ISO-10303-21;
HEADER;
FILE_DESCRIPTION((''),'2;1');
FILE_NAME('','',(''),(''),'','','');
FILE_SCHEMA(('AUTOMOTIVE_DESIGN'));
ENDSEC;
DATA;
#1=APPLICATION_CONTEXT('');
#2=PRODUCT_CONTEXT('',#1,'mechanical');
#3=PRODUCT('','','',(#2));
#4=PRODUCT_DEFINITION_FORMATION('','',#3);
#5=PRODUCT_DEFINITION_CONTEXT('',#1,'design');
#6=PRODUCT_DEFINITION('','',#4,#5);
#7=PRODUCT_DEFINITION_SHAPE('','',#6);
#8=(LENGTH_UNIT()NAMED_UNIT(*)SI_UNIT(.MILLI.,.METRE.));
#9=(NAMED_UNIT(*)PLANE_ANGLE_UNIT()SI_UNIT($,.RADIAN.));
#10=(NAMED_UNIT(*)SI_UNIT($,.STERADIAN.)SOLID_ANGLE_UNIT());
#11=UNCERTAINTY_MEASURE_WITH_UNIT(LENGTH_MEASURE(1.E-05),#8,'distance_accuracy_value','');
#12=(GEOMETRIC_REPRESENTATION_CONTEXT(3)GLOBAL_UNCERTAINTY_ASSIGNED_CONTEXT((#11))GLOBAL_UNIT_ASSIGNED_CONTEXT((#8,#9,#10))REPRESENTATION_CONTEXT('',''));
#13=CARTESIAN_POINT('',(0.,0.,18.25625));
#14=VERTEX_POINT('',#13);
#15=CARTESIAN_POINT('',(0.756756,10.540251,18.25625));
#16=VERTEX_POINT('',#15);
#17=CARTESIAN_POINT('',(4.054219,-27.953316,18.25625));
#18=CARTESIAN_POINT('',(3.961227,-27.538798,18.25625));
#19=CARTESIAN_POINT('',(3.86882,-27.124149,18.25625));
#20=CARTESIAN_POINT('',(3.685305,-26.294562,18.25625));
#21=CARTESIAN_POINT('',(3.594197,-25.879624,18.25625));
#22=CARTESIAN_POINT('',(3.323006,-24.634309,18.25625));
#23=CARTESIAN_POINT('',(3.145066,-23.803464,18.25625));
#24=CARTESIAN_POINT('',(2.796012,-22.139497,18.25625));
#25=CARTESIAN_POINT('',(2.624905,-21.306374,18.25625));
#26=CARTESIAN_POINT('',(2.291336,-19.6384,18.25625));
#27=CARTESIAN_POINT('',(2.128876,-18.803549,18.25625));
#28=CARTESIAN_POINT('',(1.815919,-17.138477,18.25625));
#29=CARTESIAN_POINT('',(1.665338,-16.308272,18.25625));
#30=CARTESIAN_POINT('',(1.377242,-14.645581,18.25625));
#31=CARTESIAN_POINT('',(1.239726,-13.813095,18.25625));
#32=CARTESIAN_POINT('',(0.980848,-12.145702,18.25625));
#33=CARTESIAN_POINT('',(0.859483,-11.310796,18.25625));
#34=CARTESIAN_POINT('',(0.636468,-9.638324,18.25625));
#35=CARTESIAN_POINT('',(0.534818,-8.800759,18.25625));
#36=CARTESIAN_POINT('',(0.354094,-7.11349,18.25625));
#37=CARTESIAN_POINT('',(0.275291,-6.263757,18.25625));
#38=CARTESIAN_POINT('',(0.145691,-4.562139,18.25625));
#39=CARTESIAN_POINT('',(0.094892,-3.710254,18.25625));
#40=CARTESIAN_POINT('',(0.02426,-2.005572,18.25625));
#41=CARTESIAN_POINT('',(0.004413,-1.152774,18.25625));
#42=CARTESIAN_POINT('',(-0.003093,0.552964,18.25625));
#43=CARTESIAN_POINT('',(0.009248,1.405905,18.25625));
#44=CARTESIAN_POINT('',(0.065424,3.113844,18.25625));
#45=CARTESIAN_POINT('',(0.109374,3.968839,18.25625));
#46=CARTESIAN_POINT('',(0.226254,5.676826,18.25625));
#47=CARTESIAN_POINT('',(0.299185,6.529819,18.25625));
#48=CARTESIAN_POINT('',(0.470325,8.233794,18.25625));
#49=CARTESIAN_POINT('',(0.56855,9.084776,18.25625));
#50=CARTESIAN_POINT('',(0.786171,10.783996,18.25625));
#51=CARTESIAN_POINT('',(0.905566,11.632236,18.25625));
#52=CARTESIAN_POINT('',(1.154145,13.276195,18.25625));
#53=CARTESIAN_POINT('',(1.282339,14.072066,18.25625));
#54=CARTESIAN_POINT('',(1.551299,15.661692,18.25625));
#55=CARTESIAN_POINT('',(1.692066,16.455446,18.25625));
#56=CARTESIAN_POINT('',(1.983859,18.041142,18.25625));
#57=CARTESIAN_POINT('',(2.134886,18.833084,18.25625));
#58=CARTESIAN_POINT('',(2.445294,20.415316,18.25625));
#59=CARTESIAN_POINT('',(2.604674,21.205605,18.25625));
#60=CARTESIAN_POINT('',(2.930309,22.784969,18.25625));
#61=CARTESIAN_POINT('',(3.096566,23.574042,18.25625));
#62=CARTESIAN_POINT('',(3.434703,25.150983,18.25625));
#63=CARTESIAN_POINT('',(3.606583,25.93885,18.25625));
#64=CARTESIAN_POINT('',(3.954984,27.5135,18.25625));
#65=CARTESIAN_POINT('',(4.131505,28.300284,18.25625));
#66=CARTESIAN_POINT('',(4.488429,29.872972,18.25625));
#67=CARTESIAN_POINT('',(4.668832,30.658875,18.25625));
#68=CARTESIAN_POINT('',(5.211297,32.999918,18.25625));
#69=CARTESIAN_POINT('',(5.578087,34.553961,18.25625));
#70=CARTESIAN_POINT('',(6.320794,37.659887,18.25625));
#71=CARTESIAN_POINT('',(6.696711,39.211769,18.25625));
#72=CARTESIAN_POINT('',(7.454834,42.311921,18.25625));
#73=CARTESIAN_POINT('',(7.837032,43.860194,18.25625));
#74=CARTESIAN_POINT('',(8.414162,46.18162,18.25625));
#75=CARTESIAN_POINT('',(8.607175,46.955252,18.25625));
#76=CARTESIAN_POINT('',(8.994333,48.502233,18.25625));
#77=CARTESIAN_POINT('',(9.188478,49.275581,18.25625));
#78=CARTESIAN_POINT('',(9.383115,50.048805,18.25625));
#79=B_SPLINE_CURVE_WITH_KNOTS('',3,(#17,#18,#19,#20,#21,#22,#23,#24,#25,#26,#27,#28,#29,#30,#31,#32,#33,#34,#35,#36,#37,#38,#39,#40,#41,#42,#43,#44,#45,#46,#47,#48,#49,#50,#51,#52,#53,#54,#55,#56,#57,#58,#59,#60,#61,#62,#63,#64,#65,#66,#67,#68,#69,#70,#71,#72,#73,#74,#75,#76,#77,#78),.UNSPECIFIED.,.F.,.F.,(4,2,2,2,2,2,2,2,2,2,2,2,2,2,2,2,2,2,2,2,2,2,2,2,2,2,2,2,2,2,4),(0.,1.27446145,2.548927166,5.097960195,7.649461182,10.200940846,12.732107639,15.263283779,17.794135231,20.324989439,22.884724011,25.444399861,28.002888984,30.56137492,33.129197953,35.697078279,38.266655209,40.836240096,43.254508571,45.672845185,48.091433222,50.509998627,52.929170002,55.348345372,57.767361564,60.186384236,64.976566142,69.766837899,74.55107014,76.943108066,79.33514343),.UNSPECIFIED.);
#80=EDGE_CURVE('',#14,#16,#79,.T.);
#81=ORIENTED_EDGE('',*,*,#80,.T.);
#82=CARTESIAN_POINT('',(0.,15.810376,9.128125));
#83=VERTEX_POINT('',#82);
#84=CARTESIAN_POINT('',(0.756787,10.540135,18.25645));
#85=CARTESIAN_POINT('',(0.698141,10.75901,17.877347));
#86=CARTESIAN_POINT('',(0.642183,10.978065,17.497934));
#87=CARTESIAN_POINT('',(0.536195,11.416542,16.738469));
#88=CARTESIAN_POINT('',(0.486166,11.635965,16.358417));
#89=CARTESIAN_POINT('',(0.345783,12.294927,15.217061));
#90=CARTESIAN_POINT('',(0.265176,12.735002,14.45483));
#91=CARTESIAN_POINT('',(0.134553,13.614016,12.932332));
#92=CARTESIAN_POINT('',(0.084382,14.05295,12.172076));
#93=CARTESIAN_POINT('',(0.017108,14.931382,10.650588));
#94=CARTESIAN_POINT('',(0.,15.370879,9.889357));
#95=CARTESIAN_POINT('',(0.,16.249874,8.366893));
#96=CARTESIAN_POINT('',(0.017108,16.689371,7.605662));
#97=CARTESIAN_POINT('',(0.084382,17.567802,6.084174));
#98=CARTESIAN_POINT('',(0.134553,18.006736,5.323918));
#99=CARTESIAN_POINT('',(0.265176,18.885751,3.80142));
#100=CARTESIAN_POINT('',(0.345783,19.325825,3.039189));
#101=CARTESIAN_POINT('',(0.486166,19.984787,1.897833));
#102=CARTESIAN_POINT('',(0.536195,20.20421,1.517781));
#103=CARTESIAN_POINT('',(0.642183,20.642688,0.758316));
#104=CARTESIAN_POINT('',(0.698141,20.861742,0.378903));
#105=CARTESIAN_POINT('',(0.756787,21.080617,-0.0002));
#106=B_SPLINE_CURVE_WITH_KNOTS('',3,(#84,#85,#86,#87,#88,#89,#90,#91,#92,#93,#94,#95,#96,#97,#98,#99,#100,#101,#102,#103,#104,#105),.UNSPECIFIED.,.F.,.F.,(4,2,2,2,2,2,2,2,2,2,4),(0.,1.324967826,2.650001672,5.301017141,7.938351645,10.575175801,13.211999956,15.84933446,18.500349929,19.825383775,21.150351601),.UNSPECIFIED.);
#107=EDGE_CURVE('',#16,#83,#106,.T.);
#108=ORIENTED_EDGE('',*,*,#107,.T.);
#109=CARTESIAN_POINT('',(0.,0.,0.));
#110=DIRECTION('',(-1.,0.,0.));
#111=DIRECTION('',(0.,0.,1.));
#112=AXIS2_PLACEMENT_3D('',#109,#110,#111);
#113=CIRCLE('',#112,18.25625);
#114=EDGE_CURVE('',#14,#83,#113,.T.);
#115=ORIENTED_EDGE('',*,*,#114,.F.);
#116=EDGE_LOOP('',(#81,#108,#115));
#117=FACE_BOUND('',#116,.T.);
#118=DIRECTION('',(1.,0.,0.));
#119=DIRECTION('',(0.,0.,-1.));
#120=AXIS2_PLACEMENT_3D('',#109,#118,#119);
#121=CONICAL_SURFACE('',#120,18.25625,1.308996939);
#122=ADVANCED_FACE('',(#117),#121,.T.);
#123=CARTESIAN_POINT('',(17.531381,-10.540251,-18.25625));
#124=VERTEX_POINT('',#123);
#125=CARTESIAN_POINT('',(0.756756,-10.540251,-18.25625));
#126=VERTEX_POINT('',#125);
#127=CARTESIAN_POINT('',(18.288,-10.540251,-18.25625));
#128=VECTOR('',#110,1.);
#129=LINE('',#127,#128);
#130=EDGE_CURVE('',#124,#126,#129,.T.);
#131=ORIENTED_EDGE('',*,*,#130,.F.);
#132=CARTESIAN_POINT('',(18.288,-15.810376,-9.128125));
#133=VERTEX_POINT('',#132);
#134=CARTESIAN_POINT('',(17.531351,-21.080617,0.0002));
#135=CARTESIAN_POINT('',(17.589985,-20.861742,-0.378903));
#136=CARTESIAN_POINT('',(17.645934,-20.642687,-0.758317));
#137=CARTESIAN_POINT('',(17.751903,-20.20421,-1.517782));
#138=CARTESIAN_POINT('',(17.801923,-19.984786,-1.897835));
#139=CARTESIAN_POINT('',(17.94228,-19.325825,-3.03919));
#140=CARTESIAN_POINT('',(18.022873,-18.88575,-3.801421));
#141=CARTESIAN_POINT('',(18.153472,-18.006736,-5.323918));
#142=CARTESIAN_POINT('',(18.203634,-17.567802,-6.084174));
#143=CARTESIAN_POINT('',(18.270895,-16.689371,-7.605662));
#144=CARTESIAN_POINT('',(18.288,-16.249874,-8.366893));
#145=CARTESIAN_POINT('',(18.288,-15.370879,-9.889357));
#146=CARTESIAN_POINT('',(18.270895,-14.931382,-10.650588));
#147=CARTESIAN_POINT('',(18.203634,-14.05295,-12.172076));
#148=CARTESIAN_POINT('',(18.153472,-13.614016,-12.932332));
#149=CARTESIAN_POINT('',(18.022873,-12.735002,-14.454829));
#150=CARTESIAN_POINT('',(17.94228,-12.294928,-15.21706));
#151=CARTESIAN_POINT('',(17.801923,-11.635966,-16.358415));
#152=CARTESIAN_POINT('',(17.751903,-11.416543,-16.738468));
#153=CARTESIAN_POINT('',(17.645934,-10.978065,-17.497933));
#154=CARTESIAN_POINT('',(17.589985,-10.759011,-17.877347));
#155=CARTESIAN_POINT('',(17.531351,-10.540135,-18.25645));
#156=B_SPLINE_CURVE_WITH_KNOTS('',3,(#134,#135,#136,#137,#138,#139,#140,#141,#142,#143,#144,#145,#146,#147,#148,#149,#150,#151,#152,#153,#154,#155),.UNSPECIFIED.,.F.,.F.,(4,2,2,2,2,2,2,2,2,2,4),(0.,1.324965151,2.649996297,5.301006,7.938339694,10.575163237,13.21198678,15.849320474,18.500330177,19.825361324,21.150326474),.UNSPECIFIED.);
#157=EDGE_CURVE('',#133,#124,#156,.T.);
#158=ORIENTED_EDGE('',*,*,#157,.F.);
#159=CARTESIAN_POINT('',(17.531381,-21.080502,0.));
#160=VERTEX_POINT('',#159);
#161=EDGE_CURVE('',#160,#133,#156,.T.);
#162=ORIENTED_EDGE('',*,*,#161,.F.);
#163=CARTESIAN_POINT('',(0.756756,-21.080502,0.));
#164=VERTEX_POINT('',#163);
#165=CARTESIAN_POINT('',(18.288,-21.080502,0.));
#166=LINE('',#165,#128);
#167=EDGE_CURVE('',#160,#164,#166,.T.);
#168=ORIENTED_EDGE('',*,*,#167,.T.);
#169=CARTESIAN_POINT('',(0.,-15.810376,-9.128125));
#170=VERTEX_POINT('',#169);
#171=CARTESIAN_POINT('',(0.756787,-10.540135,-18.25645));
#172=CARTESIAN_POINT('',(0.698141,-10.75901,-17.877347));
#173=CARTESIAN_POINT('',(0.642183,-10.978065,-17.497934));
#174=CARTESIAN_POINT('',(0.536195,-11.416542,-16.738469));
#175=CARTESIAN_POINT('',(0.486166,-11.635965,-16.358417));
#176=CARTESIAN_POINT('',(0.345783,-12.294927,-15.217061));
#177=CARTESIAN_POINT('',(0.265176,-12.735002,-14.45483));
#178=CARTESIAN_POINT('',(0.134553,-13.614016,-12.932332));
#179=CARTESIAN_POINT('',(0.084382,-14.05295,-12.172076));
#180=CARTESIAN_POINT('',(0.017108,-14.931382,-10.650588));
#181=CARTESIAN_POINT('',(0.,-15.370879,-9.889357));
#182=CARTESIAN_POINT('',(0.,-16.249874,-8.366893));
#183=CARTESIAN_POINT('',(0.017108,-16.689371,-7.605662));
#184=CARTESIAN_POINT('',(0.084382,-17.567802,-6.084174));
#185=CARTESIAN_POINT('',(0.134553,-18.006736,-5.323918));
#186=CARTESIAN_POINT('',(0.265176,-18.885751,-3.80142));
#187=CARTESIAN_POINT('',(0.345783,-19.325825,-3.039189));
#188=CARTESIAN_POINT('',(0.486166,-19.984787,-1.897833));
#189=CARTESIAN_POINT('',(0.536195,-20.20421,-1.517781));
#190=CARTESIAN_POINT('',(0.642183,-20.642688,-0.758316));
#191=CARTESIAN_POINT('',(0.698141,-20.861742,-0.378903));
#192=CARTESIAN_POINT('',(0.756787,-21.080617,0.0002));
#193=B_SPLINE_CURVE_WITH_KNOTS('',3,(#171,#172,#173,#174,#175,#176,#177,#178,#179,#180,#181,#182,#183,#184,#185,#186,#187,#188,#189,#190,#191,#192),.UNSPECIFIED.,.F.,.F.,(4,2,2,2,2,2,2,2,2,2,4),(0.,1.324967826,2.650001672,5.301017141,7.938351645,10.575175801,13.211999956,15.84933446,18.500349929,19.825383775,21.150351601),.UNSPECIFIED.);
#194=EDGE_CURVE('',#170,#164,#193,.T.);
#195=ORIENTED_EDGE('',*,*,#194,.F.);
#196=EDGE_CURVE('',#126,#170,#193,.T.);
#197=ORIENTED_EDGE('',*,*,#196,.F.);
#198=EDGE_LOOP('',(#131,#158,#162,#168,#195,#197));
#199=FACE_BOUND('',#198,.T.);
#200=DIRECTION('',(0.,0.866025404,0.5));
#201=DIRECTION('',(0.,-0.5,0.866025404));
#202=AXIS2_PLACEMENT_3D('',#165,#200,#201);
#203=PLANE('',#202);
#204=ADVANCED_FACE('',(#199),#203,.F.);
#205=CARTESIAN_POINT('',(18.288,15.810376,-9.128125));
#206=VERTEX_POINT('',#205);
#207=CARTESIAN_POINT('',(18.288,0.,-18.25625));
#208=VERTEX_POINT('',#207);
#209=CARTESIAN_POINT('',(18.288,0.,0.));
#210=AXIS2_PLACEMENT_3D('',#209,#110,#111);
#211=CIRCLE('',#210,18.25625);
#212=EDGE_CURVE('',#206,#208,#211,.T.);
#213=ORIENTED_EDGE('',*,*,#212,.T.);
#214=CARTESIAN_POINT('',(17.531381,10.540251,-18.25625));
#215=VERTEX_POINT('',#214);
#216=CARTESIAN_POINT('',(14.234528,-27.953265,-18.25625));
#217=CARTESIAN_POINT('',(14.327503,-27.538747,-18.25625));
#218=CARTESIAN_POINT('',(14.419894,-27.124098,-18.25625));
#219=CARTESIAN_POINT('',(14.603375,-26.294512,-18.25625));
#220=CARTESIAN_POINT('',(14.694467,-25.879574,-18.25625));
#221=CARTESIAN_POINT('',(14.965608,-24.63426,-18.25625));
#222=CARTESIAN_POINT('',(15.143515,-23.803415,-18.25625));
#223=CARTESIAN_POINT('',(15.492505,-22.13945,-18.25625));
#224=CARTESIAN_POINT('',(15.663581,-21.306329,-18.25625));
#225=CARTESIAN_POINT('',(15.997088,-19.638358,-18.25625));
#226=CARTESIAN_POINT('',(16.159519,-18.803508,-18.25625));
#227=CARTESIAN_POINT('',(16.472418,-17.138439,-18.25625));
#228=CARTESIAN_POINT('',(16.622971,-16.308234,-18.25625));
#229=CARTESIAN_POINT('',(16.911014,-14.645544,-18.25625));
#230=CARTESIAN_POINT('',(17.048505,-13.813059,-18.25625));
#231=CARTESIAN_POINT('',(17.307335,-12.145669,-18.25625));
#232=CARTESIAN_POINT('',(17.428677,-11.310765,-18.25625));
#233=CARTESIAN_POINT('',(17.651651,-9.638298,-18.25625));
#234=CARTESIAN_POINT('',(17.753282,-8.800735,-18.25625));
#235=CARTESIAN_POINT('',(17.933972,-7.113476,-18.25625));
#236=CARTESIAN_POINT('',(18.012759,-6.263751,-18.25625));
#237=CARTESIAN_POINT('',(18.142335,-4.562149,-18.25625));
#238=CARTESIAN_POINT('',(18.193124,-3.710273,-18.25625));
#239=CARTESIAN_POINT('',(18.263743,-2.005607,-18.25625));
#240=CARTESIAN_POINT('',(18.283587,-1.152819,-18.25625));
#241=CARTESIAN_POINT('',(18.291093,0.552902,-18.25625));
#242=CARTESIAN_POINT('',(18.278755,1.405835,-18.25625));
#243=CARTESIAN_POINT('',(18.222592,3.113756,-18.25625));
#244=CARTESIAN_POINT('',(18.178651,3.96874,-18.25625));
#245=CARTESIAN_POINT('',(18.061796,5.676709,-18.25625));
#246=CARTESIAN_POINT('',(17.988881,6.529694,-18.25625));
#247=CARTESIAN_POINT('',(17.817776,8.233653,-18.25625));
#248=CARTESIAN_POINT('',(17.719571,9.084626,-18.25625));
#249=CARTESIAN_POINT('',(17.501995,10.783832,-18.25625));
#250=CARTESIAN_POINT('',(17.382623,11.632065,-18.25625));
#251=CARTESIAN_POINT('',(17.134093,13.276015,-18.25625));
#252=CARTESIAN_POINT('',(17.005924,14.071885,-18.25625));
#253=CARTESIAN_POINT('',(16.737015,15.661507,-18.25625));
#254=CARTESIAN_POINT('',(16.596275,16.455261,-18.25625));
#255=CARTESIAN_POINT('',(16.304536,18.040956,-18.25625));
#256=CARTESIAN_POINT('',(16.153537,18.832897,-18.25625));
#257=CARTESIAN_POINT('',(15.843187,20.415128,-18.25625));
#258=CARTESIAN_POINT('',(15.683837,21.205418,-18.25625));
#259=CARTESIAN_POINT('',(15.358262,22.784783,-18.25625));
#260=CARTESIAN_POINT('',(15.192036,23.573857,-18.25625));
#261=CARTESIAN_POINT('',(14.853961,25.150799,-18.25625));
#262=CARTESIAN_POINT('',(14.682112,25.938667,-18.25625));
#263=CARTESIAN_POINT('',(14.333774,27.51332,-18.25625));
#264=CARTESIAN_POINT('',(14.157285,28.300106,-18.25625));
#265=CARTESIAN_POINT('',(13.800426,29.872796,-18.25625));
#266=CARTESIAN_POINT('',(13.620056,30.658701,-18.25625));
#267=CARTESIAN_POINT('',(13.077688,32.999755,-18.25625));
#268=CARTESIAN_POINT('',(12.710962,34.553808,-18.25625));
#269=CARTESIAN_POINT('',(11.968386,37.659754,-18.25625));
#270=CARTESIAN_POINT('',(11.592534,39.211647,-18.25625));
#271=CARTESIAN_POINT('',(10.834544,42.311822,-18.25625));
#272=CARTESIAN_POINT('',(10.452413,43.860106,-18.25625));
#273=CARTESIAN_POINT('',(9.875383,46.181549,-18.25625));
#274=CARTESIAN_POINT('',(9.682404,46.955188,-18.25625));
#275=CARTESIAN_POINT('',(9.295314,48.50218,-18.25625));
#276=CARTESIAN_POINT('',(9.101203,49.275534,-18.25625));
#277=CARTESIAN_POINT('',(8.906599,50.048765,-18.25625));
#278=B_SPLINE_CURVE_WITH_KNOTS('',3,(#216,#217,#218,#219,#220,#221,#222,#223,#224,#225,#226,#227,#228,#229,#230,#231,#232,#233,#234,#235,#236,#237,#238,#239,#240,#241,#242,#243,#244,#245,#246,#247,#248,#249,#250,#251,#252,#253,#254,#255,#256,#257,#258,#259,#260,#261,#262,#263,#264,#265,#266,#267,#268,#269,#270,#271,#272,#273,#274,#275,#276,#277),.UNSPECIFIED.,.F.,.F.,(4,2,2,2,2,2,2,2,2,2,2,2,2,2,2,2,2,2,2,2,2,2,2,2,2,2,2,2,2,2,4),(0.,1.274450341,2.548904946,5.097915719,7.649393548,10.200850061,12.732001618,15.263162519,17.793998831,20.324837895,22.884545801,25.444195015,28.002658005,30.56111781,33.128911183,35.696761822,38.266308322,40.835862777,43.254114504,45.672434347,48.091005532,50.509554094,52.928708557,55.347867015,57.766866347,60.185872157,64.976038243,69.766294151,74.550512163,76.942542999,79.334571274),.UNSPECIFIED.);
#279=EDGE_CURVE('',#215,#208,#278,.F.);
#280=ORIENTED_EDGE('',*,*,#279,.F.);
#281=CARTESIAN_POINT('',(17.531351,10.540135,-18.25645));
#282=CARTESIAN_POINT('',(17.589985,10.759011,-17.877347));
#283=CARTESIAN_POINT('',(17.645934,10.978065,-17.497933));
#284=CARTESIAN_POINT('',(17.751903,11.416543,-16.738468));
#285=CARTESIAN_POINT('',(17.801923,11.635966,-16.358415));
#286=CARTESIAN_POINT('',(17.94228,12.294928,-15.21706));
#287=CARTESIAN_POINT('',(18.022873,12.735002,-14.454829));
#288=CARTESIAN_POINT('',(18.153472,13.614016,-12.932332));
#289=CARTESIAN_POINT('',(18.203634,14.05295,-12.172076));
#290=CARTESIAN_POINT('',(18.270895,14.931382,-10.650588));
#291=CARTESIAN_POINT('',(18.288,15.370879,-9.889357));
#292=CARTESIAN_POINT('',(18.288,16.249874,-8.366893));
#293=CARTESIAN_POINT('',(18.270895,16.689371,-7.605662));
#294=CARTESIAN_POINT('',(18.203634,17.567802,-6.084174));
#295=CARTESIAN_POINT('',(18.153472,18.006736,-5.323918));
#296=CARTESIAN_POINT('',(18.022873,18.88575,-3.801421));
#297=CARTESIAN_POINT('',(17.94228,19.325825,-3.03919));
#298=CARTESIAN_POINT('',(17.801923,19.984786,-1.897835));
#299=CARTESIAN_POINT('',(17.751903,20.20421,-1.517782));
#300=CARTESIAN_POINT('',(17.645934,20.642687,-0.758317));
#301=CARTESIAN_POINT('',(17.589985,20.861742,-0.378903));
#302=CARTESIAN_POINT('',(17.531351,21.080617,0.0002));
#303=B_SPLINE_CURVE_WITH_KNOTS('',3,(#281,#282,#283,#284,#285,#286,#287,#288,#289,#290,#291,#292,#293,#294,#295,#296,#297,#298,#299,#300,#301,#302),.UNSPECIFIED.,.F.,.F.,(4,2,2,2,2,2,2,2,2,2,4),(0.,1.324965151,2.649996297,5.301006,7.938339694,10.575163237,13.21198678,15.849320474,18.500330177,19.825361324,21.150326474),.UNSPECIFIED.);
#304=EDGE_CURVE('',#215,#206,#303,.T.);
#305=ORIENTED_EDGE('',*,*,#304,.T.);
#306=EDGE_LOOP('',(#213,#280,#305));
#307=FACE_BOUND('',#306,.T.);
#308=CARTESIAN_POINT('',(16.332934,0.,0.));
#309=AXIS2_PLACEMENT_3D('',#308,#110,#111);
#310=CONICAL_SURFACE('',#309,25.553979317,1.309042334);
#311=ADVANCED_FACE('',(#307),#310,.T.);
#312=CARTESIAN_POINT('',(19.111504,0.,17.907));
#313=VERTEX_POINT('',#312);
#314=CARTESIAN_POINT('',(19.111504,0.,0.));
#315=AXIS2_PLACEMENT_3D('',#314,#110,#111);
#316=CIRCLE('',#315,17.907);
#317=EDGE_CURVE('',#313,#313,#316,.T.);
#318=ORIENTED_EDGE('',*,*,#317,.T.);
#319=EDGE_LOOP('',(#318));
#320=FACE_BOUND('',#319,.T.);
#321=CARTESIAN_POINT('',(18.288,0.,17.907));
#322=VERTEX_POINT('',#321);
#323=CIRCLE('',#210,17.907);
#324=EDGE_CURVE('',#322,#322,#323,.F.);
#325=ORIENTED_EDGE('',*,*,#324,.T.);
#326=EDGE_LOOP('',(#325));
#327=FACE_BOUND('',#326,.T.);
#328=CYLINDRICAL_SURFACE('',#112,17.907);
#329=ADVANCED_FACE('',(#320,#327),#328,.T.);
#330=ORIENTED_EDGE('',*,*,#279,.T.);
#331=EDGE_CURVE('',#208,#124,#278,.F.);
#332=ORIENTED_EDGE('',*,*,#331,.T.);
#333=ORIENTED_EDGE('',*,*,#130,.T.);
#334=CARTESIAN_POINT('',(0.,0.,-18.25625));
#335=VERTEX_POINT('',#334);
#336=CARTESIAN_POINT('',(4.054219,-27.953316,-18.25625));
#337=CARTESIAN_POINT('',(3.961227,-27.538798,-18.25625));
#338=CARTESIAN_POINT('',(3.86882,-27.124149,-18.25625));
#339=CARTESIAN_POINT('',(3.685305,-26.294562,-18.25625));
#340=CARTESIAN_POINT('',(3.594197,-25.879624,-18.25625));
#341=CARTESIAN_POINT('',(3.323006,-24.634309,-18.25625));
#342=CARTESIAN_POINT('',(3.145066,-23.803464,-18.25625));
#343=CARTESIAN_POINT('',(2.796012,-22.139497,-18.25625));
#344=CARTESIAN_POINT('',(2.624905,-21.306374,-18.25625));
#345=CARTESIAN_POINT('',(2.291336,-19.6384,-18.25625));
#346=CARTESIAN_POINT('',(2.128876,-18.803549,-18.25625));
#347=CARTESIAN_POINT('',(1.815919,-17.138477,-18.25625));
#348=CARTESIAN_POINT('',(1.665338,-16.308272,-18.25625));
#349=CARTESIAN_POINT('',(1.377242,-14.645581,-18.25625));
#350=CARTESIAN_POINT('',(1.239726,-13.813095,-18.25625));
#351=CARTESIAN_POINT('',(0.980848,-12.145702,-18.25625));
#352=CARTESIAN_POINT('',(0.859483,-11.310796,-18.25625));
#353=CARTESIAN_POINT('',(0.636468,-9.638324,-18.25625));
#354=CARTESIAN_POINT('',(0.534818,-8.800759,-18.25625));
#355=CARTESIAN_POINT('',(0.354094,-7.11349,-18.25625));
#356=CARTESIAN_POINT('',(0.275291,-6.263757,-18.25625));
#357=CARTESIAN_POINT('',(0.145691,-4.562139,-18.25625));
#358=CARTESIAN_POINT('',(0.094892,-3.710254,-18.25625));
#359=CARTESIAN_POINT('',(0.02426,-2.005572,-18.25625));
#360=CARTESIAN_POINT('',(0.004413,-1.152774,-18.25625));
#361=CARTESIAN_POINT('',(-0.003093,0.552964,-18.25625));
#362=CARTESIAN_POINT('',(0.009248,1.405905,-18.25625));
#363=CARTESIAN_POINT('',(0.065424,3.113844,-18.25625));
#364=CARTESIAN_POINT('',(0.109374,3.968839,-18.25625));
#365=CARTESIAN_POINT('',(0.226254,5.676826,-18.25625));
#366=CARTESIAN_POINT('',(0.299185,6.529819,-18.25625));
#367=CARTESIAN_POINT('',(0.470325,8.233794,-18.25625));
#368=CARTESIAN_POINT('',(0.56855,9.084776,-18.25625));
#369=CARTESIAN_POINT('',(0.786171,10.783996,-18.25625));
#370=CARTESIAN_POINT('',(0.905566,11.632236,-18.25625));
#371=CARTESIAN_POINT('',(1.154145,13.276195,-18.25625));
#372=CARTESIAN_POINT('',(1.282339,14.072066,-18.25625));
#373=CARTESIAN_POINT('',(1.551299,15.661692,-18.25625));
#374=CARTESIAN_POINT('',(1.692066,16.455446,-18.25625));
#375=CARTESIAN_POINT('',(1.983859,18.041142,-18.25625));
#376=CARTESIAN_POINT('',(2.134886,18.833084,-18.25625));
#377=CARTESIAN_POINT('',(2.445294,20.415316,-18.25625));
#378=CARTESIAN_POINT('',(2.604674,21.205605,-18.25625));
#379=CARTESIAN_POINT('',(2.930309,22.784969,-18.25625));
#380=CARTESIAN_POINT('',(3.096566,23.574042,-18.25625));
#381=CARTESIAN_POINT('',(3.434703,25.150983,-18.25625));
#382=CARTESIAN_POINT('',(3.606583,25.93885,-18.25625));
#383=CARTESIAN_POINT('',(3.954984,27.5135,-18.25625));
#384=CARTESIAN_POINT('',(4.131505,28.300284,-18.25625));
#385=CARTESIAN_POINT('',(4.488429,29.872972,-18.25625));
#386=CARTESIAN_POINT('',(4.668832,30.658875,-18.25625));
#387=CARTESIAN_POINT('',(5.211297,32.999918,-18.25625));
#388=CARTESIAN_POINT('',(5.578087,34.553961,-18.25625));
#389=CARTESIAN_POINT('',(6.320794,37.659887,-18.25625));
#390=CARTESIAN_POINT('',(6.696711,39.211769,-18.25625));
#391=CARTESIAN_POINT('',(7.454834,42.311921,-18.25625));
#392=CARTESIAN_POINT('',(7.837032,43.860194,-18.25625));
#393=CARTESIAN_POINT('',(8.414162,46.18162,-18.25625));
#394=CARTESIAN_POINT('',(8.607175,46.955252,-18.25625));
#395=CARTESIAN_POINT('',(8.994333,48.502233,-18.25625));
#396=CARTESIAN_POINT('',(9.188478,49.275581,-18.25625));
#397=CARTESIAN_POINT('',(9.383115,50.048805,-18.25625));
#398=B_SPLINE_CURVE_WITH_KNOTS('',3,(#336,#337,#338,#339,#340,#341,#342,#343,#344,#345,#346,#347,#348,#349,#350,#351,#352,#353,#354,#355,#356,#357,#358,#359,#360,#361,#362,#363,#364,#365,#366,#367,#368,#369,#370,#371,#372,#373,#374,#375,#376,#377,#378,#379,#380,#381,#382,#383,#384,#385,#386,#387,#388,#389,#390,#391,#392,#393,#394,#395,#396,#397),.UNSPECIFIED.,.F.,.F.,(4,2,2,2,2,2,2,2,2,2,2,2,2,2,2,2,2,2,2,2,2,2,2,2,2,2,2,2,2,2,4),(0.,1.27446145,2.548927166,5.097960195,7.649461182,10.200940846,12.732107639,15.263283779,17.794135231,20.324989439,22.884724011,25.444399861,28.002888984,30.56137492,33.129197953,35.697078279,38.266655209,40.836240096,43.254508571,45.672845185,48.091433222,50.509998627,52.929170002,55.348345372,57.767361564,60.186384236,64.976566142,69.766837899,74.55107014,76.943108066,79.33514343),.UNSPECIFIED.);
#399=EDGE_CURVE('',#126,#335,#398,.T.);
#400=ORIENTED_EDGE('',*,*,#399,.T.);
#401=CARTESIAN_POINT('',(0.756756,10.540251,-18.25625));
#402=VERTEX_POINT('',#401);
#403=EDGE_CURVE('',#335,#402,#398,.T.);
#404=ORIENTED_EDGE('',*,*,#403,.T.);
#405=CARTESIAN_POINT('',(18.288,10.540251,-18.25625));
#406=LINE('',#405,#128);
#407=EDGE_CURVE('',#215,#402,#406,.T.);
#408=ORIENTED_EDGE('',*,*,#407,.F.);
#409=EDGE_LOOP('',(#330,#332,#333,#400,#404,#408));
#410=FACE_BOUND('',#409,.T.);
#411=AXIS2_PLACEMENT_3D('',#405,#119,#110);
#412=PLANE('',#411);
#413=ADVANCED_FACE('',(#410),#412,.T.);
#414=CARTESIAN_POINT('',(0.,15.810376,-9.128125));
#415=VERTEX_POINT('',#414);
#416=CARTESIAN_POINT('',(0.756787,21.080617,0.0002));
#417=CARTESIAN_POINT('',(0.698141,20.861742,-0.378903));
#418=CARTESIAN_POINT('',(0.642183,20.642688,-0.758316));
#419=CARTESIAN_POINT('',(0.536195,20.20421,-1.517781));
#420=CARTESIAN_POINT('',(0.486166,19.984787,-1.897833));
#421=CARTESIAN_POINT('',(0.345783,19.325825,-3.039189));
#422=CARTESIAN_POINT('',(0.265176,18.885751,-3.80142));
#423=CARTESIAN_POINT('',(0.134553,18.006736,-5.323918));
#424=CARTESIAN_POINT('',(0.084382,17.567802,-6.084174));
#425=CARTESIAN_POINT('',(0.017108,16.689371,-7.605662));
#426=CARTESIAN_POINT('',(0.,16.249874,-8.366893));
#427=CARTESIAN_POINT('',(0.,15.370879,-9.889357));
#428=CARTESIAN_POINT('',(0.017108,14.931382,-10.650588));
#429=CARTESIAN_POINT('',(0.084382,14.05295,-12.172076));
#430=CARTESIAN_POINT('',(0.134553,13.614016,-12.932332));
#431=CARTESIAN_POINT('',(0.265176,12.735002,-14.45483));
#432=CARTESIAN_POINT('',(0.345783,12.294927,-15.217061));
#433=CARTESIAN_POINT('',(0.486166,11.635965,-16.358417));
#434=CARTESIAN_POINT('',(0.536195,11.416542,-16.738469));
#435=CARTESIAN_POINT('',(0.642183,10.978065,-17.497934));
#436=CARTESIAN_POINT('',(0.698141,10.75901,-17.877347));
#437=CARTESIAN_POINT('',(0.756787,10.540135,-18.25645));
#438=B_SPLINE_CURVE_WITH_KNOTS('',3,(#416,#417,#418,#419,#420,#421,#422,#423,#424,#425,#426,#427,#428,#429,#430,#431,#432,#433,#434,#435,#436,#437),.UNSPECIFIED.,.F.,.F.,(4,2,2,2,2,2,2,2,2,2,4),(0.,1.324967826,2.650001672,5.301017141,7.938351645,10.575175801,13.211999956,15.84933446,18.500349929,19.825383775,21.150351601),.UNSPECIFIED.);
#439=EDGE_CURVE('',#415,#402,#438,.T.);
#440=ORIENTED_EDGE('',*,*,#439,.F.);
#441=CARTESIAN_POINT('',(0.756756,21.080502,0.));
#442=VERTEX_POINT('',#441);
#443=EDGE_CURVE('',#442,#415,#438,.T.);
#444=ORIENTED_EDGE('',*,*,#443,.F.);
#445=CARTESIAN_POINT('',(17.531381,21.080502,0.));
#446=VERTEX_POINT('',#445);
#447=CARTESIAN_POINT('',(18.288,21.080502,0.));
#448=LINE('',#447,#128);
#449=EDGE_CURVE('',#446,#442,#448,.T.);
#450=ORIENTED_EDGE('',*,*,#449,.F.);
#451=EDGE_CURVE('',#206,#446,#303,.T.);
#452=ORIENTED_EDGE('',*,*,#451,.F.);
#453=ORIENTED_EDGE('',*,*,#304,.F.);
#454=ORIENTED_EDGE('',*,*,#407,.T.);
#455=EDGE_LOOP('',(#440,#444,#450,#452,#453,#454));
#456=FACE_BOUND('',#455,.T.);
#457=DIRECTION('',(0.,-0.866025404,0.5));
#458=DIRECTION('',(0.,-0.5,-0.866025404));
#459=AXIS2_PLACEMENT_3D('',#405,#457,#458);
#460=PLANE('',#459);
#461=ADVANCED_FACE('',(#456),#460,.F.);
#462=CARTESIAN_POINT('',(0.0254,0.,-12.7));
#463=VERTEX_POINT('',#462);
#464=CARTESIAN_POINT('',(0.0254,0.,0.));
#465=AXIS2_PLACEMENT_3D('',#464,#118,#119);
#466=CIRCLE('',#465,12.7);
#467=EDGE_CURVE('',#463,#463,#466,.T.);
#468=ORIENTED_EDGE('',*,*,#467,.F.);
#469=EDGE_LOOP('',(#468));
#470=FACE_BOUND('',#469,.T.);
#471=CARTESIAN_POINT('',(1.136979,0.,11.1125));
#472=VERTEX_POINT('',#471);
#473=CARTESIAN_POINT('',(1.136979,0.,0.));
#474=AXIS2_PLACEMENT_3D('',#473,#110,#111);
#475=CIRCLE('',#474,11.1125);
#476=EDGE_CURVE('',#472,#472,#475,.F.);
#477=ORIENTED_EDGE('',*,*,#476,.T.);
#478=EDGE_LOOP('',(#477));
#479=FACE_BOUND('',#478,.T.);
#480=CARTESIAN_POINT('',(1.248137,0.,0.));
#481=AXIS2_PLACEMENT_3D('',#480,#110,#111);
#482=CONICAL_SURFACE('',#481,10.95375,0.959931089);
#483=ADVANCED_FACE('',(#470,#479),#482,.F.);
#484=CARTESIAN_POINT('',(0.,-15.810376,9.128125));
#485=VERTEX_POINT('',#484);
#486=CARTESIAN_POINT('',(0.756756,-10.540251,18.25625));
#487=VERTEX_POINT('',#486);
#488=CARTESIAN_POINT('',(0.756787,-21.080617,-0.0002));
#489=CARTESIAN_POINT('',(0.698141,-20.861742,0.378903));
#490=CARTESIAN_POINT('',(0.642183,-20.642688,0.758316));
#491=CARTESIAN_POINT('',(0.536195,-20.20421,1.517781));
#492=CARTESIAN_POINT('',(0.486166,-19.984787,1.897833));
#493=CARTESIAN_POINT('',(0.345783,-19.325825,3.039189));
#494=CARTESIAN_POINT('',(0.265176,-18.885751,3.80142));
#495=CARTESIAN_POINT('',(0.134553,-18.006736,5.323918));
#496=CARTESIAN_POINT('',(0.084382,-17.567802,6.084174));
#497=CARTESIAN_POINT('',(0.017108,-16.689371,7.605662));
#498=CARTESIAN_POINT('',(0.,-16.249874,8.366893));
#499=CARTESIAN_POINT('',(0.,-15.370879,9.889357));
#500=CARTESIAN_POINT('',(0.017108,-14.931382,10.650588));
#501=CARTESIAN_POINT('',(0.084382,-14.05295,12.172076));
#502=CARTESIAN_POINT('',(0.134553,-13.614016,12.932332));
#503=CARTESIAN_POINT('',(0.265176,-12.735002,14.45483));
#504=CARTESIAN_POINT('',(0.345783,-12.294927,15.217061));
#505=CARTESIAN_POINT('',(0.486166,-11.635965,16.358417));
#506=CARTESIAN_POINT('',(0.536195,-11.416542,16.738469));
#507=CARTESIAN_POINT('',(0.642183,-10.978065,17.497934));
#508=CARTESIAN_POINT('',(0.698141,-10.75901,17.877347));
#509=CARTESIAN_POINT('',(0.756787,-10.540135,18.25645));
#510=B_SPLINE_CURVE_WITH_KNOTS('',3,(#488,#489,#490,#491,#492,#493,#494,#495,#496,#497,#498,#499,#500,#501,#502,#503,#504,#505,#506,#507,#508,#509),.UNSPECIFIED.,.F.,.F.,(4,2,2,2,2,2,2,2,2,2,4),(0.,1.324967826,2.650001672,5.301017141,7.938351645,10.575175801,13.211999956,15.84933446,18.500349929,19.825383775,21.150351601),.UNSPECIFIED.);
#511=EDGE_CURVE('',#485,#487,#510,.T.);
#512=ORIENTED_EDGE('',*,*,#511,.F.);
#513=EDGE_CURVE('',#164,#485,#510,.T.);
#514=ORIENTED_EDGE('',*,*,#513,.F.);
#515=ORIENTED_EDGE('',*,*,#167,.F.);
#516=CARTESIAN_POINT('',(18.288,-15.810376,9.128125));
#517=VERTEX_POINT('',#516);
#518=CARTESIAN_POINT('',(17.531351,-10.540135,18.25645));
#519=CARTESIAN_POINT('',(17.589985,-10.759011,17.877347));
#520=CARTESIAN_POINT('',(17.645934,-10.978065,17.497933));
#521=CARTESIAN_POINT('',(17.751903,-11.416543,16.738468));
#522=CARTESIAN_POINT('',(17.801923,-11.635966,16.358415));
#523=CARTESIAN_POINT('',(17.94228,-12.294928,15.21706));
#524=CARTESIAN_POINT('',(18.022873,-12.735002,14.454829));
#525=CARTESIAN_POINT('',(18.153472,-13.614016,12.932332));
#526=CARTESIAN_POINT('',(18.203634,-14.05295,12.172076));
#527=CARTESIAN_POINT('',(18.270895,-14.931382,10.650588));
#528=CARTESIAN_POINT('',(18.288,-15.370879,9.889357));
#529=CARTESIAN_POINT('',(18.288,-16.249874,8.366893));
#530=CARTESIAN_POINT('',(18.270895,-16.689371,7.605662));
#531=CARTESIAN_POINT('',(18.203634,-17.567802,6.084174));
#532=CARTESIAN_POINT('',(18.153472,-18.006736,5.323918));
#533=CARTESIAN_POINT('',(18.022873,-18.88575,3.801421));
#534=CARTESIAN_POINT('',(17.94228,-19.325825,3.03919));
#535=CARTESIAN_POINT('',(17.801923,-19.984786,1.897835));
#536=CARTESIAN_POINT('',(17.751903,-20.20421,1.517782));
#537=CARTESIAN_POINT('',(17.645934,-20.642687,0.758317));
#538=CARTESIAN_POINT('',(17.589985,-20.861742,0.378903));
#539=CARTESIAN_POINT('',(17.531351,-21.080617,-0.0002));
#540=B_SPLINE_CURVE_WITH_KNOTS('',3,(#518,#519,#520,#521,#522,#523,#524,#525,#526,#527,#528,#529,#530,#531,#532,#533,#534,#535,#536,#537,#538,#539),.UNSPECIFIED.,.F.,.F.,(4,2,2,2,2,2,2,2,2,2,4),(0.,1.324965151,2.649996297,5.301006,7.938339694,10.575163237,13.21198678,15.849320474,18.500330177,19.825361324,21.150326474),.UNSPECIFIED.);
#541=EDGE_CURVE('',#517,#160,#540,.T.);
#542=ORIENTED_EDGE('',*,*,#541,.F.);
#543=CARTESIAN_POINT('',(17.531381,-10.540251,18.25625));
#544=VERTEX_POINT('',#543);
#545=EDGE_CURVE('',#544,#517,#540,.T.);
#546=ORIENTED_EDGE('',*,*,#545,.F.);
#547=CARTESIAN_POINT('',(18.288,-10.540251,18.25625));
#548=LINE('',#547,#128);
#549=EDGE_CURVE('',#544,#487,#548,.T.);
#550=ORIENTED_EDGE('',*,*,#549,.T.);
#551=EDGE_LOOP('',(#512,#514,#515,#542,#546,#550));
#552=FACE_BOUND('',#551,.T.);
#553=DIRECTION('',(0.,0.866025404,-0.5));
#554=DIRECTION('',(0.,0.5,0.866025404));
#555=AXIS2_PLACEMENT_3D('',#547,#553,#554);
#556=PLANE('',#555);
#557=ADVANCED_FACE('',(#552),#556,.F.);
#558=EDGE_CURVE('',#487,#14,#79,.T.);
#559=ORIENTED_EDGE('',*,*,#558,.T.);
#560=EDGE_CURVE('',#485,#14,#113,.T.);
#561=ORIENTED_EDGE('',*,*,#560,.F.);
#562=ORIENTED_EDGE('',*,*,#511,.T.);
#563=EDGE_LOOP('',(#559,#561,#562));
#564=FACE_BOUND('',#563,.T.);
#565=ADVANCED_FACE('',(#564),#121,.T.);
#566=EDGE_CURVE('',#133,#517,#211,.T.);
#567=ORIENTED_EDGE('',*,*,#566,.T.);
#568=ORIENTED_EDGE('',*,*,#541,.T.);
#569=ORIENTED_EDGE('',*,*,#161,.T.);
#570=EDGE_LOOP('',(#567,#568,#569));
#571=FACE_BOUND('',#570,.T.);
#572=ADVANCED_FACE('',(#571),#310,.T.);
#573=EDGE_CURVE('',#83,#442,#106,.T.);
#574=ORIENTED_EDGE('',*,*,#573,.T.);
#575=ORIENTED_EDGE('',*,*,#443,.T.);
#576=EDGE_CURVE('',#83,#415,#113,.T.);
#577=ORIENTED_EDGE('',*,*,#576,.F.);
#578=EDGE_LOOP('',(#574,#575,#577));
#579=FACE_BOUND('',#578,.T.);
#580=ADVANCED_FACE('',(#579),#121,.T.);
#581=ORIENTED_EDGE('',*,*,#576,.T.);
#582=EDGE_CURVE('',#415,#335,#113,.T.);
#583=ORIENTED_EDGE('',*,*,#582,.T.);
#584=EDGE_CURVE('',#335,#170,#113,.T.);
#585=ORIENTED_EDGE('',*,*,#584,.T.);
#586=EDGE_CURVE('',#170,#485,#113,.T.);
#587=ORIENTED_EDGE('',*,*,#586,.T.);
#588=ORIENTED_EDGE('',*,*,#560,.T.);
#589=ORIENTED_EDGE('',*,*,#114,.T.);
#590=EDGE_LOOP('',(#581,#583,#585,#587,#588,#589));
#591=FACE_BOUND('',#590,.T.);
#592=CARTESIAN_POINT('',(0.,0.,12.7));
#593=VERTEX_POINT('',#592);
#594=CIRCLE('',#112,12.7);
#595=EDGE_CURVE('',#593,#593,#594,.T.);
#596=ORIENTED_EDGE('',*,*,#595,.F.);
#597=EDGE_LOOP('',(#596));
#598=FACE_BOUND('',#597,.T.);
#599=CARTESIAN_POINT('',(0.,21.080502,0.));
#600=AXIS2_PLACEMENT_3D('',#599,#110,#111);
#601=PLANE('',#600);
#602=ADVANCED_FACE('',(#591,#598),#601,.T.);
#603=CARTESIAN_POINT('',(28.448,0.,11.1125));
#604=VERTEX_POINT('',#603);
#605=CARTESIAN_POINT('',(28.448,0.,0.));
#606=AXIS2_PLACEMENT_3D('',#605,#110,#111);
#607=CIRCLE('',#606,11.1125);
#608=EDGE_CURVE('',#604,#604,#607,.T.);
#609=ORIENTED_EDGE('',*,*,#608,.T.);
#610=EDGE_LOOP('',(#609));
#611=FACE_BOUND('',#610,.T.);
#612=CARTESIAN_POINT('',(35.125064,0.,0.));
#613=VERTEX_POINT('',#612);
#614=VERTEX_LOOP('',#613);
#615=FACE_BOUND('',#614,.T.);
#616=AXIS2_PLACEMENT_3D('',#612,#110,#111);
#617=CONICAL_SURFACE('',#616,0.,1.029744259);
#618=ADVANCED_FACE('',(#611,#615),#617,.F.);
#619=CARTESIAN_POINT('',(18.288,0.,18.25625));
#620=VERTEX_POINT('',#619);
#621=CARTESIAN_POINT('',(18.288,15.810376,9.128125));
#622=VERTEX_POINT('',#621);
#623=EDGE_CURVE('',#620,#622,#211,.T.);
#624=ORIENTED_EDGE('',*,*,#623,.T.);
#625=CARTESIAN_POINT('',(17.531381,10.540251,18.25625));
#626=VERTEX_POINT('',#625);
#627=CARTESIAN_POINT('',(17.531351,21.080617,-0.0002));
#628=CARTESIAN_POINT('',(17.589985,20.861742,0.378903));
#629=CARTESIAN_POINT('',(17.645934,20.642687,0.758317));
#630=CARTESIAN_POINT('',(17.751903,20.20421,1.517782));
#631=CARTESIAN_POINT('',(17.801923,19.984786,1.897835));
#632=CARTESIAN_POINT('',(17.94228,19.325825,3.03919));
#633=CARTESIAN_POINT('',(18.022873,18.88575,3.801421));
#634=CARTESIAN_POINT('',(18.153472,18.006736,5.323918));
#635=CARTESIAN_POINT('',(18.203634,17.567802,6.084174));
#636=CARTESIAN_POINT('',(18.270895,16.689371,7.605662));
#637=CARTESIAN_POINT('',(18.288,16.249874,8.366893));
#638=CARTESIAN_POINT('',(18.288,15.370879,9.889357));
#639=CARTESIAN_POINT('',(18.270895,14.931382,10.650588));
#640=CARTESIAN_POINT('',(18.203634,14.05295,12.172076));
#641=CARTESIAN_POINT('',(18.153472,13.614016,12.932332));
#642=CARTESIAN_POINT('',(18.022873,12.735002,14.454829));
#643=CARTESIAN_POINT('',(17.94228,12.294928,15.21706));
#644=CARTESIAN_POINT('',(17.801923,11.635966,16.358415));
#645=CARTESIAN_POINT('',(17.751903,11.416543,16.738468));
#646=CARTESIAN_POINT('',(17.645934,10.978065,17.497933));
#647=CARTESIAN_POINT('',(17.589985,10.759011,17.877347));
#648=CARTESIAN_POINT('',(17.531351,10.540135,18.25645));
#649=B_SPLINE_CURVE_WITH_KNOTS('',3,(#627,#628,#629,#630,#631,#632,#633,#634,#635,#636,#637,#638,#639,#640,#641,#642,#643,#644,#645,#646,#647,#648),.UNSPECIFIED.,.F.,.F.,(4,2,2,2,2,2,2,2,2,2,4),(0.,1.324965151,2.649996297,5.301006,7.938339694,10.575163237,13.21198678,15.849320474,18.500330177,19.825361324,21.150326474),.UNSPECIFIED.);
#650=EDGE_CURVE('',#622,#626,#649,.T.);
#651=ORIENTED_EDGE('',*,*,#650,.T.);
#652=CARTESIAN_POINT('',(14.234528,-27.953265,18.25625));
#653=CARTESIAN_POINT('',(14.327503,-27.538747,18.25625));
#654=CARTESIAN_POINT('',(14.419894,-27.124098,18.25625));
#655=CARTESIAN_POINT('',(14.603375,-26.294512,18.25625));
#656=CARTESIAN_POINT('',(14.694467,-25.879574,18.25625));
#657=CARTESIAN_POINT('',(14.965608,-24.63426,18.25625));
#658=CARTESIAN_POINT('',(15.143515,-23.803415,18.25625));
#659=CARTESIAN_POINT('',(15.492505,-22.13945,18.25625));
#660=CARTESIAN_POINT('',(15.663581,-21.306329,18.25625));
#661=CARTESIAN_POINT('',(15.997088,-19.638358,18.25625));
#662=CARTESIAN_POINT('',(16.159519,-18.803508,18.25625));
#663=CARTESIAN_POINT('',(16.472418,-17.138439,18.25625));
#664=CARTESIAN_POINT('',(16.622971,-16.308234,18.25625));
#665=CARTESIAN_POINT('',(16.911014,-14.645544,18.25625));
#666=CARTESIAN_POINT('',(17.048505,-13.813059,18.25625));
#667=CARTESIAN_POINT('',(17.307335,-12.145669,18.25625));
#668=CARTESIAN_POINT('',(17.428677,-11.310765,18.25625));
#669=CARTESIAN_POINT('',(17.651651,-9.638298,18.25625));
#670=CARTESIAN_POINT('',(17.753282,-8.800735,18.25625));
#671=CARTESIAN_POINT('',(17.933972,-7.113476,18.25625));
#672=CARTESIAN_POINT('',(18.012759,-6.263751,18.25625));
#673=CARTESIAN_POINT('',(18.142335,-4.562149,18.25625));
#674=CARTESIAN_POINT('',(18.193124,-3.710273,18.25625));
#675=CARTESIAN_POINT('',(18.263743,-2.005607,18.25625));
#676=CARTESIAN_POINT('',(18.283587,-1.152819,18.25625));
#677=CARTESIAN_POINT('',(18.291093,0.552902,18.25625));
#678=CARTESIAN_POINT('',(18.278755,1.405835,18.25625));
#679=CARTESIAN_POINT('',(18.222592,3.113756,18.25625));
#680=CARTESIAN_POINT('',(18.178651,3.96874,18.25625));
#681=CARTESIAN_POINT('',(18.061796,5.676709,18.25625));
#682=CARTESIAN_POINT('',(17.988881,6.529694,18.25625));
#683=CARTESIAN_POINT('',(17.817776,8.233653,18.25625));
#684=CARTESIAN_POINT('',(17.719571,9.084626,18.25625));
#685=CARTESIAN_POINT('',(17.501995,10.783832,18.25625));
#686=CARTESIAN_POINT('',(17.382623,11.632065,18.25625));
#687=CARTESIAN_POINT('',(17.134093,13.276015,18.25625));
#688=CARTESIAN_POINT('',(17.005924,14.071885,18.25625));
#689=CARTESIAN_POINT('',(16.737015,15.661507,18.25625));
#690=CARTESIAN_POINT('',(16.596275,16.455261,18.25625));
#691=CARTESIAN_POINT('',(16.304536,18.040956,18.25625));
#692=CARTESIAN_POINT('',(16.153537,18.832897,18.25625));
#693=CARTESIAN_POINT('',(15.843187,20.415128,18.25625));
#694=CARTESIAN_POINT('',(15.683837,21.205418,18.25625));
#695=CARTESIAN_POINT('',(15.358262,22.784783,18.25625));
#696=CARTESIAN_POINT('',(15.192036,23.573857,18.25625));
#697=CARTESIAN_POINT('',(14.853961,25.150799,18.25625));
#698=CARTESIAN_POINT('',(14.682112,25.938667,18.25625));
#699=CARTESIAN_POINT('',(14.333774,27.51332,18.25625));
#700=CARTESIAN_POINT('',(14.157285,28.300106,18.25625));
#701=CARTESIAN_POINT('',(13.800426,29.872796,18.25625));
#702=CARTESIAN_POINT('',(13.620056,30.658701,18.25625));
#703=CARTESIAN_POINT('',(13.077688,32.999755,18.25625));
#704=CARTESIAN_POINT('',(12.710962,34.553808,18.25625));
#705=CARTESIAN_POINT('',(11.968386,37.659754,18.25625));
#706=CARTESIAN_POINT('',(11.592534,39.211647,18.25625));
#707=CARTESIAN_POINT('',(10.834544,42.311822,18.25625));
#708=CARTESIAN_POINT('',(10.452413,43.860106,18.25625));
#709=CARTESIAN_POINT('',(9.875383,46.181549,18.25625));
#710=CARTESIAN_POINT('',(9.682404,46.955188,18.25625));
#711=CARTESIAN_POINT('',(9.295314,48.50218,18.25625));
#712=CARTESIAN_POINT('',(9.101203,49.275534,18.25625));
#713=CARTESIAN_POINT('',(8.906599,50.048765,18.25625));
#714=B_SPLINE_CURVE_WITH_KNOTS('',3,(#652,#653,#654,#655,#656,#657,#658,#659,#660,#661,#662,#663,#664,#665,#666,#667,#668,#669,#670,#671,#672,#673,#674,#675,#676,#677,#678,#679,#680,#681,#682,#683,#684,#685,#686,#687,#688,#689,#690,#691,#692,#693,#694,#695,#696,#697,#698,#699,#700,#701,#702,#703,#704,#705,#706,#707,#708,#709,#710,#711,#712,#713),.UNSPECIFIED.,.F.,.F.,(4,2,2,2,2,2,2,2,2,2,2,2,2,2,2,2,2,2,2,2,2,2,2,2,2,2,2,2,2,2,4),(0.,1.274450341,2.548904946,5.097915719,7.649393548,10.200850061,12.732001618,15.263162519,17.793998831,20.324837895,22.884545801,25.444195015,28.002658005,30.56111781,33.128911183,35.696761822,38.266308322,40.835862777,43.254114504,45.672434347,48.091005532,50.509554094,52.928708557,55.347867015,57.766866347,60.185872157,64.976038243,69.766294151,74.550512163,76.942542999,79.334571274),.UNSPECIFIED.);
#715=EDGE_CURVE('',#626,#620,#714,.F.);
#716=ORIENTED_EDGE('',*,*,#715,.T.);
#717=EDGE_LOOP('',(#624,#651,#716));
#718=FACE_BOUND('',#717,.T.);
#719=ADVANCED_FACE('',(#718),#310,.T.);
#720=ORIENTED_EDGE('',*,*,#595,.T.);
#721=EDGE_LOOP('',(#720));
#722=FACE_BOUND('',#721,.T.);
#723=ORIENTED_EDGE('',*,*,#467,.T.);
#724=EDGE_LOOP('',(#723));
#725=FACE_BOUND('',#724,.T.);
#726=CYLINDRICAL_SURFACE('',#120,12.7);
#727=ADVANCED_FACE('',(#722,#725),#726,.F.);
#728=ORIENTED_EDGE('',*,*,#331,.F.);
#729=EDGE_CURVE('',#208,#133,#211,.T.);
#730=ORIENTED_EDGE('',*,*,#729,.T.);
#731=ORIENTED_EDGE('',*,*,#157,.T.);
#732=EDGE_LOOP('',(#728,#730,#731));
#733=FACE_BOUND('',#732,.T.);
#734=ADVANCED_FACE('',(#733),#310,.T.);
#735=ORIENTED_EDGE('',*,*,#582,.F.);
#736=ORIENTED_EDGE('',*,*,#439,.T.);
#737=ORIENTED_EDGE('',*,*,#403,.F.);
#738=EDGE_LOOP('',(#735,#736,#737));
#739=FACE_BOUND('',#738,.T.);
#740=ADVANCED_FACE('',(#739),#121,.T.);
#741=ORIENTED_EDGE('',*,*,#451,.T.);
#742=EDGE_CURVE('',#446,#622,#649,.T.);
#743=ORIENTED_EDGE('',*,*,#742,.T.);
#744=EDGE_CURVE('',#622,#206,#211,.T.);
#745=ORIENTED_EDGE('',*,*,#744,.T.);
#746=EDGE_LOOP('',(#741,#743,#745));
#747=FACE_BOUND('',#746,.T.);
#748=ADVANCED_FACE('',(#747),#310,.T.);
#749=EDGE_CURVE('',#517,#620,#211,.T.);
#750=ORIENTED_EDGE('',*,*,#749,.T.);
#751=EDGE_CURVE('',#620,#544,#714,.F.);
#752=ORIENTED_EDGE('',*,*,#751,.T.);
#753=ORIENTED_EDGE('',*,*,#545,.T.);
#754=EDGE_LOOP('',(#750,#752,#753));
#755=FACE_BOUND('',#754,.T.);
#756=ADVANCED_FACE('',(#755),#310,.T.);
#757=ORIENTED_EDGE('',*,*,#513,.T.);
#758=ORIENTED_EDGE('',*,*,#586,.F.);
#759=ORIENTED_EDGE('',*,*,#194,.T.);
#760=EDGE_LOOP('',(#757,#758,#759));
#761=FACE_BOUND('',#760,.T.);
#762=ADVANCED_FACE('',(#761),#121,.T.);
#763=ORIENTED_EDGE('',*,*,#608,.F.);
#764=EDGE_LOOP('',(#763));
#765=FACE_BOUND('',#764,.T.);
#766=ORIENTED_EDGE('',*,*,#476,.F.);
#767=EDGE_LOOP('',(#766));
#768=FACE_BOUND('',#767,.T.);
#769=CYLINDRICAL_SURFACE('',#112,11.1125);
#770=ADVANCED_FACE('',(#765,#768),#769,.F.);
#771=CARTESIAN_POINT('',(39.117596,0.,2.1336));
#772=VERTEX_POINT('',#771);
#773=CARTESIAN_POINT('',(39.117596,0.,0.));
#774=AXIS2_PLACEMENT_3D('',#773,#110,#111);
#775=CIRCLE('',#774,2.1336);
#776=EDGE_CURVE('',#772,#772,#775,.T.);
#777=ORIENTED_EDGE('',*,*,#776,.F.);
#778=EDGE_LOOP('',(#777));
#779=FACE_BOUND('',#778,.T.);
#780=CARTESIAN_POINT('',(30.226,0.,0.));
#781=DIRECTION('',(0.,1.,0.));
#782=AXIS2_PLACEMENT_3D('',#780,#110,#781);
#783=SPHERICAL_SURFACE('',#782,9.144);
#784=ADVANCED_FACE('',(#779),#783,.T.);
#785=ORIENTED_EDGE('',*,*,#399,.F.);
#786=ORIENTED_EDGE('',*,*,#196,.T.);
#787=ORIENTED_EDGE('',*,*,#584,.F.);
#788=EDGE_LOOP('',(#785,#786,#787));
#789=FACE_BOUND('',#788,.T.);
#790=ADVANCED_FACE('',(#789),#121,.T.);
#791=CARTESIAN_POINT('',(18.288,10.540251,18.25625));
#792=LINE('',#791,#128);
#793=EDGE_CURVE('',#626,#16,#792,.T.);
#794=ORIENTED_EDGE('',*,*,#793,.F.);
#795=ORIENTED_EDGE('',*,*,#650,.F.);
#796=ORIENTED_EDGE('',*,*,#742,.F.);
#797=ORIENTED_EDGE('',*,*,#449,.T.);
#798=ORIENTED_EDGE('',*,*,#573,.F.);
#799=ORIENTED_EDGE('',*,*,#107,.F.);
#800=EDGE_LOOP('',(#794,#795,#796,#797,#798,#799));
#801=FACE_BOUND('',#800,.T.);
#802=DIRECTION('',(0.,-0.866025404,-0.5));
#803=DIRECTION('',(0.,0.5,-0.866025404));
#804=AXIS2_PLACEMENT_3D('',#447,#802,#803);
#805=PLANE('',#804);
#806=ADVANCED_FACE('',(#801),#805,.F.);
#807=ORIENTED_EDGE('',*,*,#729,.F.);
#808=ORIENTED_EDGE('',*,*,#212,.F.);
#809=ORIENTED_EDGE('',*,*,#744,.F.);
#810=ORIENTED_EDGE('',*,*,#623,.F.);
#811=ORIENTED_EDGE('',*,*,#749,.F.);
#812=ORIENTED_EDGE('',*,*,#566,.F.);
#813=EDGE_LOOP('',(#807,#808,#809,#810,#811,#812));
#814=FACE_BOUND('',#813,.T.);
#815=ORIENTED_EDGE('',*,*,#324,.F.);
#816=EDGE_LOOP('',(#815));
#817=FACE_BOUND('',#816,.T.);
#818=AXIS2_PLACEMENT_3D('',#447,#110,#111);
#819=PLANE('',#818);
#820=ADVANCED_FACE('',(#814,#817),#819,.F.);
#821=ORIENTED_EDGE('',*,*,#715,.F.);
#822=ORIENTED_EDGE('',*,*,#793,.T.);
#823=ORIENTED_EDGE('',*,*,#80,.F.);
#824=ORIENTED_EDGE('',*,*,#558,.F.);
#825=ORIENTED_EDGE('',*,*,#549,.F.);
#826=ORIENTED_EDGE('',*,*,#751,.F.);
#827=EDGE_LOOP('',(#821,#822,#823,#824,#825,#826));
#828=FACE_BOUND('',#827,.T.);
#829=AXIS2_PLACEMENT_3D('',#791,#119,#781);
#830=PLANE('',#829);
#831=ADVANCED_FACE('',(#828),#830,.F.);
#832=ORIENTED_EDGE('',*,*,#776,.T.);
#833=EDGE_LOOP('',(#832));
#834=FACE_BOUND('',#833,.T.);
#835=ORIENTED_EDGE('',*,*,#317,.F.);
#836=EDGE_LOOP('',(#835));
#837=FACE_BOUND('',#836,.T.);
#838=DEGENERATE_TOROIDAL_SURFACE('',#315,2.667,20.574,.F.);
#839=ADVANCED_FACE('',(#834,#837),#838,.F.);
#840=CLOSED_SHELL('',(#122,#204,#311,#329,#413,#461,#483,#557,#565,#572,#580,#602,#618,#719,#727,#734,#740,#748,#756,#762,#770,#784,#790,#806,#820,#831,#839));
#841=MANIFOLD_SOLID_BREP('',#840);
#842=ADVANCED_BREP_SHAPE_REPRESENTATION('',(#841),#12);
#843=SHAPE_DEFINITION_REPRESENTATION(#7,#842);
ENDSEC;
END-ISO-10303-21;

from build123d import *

# Parameters (mm, degrees)
BASENUT_DEPTH = 18.288


# Read off the part's stored shape, not the designer's step: ThreadSchematic
with BuildPart() as part:
    # BaseNutSke → BaseNut (new body)
    with BuildSketch(Plane(origin=(0, 0, 0), x_dir=(0, 0, -1), z_dir=(1, 0, 0))):
        Polygon((18.25625, 10.540250852), (18.25625, -10.540250852), (0, -21.080501704), (-18.25625, -10.540250852), (-18.25625, 10.540250852), (0, 21.080501704), align=None)
    extrude(amount=BASENUT_DEPTH)

    # Sketch3 → Crown (revolve)
    with BuildSketch(Plane.XY, mode=Mode.PRIVATE) as crown_sk:
        with BuildLine():
            Line((39.37, 0), (0, 0))
            Line((0, 0), (0, 17.907))
            Line((0, 17.907), (19.111504465, 17.907))
            ThreePointArc((19.111504465, 17.907), (31.849674106, 13.489376766), (39.117596428, 2.1336))
            ThreePointArc((39.117596428, 2.1336), (39.306679868, 1.074238861), (39.37, 0))
        make_face()
    revolve(crown_sk.sketch.rotate(Axis((0, 0, 0), (1, 0, 0)), 90), axis=Axis((0, 0, 0), (1, 0, 0)))

    # Sketch4 → DoubleChamfer (revolve, cut)
    with BuildSketch(Plane.XY, mode=Mode.PRIVATE) as doublechamfer_sk:
        Polygon((0, 18.25625), (1.955420677, 25.553979317), (16.332934387, 25.553979317), (18.288, 18.25625), (30.988, 18.25625), (30.988, 43.65625), (-12.7, 43.65625), (-12.7, 18.25625), align=None)
    revolve(doublechamfer_sk.sketch.rotate(Axis((0, 0, 0), (1, 0, 0)), 90), axis=Axis((0, 0, 0), (1, 0, 0)), mode=Mode.SUBTRACT)

    # ThreadSchematic outline → ThreadSchematic (revolve, cut)
    with BuildSketch(Plane.YX):
        Polygon((11.1125, 0), (11.1125, 28.448), (0, 35.125063629), (0, 0), align=None)
    revolve(axis=Axis((0, 0, 0), (1, 0, 0)), mode=Mode.SUBTRACT)

    # EndChamferSketch → EndChamfer (revolve, cut)
    with BuildSketch(Plane.XY, mode=Mode.PRIVATE) as endchamfer_sk:
        Polygon((-0.0254, 12.7), (0.0254, 12.7), (1.248137414, 10.95375), (-0.0254, 10.95375), align=None)
    revolve(endchamfer_sk.sketch.rotate(Axis((0, 0, 0), (-1, 0, 0)), 270), axis=Axis((0, 0, 0), (-1, 0, 0)), mode=Mode.SUBTRACT)


solid = part.part
